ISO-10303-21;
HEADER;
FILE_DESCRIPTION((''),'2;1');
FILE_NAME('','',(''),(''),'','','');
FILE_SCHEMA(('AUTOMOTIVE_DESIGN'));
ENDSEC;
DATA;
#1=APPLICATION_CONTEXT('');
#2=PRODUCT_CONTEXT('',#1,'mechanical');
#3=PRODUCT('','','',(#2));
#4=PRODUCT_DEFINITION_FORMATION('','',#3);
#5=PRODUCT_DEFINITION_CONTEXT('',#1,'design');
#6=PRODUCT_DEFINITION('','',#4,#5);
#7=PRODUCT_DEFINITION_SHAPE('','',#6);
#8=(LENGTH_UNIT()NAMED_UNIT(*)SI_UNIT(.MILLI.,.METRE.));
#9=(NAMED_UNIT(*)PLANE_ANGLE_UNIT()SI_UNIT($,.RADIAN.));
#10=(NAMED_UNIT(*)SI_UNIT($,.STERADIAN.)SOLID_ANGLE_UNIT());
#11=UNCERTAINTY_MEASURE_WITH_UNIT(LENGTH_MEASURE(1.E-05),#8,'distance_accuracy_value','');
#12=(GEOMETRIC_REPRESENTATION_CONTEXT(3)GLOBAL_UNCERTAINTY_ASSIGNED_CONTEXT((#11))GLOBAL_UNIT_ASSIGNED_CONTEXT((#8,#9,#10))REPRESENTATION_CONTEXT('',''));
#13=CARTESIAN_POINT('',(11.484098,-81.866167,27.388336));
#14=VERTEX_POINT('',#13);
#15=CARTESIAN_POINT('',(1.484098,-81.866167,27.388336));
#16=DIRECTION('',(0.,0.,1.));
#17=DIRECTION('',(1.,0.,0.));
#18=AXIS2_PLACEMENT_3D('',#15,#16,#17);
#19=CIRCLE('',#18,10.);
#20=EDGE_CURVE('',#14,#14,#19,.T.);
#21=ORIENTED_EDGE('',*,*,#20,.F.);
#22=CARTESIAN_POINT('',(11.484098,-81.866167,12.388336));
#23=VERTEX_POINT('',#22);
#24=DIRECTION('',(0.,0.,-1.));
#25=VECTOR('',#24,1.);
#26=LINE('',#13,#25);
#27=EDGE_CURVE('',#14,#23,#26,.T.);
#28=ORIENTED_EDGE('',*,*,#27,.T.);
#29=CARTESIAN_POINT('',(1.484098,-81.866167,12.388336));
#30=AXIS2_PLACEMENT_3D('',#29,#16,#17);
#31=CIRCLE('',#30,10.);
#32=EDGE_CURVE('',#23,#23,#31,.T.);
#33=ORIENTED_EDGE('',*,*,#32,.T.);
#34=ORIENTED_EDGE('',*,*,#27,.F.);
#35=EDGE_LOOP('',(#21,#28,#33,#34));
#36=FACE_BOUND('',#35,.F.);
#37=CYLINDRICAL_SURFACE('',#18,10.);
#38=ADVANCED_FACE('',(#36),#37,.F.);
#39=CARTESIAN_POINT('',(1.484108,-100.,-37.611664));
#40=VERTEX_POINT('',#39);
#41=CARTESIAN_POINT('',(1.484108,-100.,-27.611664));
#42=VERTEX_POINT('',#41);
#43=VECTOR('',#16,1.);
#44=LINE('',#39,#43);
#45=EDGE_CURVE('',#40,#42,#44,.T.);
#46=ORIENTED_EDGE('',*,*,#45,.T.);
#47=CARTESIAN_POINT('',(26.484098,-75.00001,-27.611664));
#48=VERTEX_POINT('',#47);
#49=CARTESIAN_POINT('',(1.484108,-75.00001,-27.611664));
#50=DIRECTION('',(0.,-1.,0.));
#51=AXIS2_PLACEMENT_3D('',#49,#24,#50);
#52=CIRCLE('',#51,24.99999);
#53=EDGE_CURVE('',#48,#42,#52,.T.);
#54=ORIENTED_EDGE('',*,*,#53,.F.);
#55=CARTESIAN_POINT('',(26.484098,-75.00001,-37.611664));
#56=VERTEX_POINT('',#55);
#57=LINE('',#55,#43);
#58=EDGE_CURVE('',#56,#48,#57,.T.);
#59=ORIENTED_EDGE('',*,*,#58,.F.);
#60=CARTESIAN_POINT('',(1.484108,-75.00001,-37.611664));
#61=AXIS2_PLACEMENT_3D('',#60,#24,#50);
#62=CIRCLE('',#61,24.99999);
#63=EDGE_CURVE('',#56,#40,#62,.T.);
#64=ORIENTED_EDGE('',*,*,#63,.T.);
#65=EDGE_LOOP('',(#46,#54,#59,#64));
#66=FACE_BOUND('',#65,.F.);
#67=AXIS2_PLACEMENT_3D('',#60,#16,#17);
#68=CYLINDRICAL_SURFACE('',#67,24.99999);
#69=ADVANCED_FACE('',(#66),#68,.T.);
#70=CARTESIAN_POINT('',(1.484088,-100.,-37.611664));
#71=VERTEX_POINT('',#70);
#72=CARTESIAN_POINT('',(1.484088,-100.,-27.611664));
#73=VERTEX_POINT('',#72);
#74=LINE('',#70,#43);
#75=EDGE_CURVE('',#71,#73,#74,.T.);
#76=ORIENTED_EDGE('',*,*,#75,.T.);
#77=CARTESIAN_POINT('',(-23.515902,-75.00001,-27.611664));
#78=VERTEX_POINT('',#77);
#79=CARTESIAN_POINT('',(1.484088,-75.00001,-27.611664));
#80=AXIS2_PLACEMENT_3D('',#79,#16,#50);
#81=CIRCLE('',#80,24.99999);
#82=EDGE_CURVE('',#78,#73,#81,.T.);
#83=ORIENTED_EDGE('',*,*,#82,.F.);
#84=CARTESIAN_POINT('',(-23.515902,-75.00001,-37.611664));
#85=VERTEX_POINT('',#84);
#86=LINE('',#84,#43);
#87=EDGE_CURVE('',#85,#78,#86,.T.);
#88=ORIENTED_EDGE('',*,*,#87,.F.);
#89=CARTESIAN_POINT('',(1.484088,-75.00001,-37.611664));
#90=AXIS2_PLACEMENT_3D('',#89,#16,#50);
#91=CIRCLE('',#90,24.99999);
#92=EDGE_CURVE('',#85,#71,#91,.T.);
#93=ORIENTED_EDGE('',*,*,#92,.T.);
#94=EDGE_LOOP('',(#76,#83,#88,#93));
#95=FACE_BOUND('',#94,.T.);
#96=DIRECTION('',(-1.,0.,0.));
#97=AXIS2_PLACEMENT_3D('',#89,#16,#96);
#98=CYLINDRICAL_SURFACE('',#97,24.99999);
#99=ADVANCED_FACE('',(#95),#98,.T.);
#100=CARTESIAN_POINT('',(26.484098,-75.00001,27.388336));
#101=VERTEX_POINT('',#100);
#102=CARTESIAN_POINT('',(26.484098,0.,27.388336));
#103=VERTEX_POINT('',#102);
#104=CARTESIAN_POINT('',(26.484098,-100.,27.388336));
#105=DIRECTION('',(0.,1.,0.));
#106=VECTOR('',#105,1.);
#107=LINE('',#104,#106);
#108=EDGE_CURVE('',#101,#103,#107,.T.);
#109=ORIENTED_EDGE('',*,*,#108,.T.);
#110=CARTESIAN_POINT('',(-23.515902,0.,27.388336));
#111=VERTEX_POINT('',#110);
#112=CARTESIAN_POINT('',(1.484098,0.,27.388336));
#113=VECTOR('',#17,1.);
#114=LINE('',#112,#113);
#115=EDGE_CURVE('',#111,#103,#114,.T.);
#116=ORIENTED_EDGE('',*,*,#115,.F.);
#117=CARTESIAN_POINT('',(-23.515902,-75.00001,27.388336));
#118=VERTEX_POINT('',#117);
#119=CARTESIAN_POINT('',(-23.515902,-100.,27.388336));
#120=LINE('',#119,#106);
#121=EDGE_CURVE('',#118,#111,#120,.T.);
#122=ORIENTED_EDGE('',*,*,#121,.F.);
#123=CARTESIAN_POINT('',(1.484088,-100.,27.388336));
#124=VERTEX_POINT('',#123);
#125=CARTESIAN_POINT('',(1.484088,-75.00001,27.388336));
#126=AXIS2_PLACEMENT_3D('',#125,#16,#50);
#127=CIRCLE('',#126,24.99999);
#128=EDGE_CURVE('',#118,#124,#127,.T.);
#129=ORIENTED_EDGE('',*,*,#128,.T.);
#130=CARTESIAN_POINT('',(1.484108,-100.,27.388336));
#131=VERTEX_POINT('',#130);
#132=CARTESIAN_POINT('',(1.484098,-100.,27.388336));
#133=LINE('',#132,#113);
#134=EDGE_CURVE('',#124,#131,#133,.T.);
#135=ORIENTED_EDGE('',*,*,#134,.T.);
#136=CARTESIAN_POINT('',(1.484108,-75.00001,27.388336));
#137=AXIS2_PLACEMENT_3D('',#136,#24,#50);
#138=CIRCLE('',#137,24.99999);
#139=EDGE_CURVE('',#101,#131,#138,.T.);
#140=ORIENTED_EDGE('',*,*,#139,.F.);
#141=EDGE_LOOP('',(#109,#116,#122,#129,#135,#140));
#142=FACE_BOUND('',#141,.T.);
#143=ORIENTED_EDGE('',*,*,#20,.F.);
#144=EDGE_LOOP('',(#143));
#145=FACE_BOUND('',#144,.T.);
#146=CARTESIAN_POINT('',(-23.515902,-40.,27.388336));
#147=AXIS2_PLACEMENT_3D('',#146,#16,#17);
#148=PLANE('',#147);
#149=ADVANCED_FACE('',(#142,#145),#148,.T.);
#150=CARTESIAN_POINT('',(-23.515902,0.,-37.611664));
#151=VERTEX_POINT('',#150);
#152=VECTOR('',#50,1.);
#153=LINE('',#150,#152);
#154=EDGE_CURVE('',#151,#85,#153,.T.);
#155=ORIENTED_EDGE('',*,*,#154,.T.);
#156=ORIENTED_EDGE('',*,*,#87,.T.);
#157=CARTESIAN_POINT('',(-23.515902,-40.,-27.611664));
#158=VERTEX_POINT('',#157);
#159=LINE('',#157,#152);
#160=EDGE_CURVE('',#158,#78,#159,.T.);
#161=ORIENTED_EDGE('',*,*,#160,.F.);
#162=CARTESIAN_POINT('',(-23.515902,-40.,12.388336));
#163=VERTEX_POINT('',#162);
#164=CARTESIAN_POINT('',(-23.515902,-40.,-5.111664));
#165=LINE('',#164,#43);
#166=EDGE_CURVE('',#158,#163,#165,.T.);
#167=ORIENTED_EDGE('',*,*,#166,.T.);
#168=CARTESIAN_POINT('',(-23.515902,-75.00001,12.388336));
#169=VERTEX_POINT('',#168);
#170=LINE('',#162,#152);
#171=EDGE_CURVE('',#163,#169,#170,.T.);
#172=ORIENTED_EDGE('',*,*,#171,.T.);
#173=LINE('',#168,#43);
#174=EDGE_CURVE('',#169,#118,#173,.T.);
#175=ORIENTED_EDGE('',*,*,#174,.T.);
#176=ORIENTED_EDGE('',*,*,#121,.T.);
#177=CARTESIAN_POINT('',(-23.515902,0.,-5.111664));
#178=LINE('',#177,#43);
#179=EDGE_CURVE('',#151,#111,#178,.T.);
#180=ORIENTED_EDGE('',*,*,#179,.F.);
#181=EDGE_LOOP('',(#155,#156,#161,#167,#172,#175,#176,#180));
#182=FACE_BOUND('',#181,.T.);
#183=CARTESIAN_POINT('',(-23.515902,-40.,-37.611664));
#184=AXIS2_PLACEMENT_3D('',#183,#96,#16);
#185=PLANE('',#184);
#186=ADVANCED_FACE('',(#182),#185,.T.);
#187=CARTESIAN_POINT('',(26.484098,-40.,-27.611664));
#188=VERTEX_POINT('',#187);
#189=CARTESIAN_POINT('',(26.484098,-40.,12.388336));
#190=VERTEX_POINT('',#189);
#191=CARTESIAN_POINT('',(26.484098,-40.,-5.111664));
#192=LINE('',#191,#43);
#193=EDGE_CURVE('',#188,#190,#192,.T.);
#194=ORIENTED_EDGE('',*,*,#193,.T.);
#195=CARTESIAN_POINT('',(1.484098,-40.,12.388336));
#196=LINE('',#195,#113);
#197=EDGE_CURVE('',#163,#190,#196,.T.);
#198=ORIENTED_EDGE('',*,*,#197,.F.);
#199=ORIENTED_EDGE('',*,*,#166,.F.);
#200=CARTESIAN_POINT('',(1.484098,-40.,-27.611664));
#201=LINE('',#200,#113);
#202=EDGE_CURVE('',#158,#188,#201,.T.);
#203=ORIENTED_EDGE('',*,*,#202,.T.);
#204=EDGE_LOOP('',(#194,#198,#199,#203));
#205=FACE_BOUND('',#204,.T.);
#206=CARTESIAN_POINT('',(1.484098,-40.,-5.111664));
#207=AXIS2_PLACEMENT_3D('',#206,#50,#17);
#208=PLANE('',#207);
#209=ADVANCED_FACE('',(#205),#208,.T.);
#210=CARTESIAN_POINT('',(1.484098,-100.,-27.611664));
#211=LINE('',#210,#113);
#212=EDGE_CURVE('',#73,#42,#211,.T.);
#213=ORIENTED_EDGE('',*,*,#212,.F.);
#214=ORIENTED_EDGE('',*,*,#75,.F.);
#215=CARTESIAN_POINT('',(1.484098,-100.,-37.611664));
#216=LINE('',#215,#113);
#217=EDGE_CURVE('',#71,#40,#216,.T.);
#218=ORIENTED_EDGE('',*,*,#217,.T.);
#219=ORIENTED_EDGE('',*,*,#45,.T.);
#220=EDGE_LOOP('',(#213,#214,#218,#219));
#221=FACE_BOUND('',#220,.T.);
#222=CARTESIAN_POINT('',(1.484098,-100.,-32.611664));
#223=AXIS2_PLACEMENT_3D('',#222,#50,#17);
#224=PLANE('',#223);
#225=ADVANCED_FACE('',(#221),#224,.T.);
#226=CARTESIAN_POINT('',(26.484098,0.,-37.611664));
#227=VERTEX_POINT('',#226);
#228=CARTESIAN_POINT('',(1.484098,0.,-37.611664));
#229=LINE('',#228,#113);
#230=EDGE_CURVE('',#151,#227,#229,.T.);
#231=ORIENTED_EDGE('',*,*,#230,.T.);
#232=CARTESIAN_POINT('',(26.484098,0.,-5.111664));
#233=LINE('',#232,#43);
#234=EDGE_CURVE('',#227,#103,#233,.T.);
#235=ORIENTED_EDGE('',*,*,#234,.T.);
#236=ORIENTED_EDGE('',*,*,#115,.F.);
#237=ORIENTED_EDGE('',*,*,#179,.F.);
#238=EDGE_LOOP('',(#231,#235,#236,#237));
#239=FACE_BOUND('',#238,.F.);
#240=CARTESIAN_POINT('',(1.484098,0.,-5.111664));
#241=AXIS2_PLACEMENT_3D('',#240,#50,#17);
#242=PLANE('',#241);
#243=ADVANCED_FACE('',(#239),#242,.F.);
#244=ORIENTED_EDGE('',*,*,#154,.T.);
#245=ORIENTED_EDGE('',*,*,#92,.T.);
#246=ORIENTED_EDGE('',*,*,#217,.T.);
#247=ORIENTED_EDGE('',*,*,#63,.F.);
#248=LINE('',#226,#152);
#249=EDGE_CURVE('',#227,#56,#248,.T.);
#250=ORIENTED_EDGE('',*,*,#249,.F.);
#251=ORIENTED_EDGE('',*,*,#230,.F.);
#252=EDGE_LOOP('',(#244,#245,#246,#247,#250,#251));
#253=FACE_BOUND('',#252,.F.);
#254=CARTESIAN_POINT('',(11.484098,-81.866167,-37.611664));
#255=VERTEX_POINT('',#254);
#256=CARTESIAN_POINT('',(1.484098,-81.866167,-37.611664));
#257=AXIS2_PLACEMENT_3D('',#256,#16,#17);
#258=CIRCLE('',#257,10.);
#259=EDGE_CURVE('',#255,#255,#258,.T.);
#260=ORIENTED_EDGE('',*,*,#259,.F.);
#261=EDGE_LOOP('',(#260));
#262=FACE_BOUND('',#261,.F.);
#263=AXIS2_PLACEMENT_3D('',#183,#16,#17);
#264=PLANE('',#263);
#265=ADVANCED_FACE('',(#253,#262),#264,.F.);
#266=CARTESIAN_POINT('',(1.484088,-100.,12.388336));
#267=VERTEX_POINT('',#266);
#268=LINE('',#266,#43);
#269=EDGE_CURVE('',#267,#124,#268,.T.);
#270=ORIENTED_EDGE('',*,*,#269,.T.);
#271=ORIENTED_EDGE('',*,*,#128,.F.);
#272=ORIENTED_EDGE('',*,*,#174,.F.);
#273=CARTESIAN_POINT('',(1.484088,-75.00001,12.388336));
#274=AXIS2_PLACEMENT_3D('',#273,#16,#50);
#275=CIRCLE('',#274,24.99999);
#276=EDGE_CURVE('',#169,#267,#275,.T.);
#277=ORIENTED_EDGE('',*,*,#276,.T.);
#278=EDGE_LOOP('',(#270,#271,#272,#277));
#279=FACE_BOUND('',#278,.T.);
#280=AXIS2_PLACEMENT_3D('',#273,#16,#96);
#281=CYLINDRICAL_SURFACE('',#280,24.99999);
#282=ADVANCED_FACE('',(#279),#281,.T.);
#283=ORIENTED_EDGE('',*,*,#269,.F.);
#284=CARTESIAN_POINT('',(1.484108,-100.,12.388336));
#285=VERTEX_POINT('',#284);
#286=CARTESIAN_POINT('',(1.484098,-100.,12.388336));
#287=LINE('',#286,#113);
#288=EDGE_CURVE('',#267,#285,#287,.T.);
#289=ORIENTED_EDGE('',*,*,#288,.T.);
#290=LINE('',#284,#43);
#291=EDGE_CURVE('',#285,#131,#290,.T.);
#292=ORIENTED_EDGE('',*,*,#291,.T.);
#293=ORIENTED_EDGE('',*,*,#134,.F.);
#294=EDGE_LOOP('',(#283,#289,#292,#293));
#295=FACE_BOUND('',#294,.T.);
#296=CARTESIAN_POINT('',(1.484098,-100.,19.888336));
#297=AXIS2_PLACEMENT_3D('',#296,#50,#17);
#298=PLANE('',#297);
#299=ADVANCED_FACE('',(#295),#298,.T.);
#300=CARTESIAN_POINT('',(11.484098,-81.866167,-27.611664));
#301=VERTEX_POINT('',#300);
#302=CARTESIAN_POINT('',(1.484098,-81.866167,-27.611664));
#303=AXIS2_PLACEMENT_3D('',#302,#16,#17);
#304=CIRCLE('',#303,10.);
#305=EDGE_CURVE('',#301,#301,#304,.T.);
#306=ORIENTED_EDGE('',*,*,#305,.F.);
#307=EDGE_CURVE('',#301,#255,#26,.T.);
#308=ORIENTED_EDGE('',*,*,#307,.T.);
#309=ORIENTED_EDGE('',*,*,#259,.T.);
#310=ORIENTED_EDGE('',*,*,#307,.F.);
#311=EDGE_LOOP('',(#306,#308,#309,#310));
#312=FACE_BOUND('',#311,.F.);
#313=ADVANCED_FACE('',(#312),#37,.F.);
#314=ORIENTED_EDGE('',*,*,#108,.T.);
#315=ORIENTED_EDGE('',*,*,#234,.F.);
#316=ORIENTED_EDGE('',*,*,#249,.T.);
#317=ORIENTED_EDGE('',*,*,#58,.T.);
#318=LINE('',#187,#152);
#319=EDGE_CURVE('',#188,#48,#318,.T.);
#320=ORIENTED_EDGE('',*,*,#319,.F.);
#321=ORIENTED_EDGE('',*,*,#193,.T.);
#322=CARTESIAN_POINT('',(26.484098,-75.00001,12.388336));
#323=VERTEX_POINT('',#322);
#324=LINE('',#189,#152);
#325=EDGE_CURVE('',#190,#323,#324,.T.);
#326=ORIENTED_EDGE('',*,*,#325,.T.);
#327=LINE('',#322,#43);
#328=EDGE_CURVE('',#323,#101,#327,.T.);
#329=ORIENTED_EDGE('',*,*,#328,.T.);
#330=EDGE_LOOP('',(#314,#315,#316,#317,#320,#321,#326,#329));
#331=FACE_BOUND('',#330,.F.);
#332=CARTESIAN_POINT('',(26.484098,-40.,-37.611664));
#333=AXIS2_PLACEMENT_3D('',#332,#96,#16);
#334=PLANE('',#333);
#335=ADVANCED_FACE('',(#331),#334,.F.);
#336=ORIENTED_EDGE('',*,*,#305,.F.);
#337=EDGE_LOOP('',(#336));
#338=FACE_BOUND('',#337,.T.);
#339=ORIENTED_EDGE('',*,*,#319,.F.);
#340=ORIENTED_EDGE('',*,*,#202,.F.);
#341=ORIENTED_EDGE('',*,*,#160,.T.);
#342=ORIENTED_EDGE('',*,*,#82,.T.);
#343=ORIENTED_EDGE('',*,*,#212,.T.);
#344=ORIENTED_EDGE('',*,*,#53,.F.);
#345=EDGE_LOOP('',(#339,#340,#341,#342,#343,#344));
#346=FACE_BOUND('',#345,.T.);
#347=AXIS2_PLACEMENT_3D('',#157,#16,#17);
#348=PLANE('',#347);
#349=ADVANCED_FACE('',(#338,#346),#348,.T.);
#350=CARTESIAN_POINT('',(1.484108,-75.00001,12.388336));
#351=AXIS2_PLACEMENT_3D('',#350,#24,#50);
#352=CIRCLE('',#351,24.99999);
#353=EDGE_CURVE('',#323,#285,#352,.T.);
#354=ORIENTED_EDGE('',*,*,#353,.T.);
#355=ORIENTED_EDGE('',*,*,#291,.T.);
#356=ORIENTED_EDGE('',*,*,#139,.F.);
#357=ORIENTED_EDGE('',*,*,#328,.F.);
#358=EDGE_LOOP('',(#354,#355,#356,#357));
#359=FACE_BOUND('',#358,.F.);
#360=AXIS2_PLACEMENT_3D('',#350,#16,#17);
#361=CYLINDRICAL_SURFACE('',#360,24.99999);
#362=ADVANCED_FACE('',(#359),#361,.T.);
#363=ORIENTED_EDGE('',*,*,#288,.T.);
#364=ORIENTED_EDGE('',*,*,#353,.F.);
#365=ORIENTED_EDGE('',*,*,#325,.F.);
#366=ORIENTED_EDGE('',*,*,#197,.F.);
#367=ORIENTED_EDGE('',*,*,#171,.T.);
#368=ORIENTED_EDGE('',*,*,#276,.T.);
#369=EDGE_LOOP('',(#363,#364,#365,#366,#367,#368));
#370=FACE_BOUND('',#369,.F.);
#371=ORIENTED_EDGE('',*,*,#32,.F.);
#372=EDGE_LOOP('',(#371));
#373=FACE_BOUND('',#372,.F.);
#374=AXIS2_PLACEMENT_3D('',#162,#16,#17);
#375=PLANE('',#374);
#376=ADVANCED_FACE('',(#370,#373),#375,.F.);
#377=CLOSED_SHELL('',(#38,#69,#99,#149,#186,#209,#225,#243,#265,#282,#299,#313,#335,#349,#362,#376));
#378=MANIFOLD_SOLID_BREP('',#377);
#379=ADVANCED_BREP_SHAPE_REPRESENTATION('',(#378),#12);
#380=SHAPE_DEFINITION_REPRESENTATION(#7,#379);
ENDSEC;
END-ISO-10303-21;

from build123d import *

# Parameters (mm, degrees)
F0_W     = 50
F0_H     = 65
F1_DEPTH = 40
F2_W     = 50
F2_H     = 15
F3_DEPTH = 60
F4_W     = 50
F4_H     = 10
F5_DEPTH = 60
F6_R     = 24.99999
F7_R     = 10
F8_DEPTH = 92.4


# Not quite as in the source:
# - a fillet or chamfer is up to 0.001 mm smaller than in the source, because OpenCascade refuses the exact size


with BuildPart() as f1:
    # F0 (on Front) → F1 (new body)
    with BuildSketch(Plane.XZ):
        with Locations((1.4840979129, -5.1116640333)):
            Rectangle(F0_W, F0_H)
    extrude(amount=F1_DEPTH)

    # F2 (on face) → F3 (join)
    with BuildSketch(Plane.XZ.offset(40)):
        with Locations((1.4840979129, 19.8883359667)):
            Rectangle(F2_W, F2_H)
    extrude(amount=F3_DEPTH)

    # F4 (on face) → F5 (join)
    with BuildSketch(Plane.XZ.offset(40)):
        with Locations((1.4840979129, -32.6116640333)):
            Rectangle(F4_W, F4_H)
    extrude(amount=F5_DEPTH)

    # F6 (radius 25 in the source; OpenCascade refuses exactly that, so slightly less here)
    f6_edges = [f1.edges().sort_by_distance(p)[0] for p in [
        (-23.515902, -100, -32.611664),
        (-23.515902, -100, 19.888336),
        (26.484098, -100, 19.888336),
        (26.484098, -100, -32.611664),
    ]]
    fillet(f6_edges, radius=F6_R)

    # F7 (on face) → F8 (cut)
    with BuildSketch(Plane.XY.offset(27.3883359667)):
        with Locations((1.4840979129, -81.8661674857)):
            Circle(F7_R)
    extrude(amount=-F8_DEPTH, mode=Mode.SUBTRACT)


solid = f1.part
